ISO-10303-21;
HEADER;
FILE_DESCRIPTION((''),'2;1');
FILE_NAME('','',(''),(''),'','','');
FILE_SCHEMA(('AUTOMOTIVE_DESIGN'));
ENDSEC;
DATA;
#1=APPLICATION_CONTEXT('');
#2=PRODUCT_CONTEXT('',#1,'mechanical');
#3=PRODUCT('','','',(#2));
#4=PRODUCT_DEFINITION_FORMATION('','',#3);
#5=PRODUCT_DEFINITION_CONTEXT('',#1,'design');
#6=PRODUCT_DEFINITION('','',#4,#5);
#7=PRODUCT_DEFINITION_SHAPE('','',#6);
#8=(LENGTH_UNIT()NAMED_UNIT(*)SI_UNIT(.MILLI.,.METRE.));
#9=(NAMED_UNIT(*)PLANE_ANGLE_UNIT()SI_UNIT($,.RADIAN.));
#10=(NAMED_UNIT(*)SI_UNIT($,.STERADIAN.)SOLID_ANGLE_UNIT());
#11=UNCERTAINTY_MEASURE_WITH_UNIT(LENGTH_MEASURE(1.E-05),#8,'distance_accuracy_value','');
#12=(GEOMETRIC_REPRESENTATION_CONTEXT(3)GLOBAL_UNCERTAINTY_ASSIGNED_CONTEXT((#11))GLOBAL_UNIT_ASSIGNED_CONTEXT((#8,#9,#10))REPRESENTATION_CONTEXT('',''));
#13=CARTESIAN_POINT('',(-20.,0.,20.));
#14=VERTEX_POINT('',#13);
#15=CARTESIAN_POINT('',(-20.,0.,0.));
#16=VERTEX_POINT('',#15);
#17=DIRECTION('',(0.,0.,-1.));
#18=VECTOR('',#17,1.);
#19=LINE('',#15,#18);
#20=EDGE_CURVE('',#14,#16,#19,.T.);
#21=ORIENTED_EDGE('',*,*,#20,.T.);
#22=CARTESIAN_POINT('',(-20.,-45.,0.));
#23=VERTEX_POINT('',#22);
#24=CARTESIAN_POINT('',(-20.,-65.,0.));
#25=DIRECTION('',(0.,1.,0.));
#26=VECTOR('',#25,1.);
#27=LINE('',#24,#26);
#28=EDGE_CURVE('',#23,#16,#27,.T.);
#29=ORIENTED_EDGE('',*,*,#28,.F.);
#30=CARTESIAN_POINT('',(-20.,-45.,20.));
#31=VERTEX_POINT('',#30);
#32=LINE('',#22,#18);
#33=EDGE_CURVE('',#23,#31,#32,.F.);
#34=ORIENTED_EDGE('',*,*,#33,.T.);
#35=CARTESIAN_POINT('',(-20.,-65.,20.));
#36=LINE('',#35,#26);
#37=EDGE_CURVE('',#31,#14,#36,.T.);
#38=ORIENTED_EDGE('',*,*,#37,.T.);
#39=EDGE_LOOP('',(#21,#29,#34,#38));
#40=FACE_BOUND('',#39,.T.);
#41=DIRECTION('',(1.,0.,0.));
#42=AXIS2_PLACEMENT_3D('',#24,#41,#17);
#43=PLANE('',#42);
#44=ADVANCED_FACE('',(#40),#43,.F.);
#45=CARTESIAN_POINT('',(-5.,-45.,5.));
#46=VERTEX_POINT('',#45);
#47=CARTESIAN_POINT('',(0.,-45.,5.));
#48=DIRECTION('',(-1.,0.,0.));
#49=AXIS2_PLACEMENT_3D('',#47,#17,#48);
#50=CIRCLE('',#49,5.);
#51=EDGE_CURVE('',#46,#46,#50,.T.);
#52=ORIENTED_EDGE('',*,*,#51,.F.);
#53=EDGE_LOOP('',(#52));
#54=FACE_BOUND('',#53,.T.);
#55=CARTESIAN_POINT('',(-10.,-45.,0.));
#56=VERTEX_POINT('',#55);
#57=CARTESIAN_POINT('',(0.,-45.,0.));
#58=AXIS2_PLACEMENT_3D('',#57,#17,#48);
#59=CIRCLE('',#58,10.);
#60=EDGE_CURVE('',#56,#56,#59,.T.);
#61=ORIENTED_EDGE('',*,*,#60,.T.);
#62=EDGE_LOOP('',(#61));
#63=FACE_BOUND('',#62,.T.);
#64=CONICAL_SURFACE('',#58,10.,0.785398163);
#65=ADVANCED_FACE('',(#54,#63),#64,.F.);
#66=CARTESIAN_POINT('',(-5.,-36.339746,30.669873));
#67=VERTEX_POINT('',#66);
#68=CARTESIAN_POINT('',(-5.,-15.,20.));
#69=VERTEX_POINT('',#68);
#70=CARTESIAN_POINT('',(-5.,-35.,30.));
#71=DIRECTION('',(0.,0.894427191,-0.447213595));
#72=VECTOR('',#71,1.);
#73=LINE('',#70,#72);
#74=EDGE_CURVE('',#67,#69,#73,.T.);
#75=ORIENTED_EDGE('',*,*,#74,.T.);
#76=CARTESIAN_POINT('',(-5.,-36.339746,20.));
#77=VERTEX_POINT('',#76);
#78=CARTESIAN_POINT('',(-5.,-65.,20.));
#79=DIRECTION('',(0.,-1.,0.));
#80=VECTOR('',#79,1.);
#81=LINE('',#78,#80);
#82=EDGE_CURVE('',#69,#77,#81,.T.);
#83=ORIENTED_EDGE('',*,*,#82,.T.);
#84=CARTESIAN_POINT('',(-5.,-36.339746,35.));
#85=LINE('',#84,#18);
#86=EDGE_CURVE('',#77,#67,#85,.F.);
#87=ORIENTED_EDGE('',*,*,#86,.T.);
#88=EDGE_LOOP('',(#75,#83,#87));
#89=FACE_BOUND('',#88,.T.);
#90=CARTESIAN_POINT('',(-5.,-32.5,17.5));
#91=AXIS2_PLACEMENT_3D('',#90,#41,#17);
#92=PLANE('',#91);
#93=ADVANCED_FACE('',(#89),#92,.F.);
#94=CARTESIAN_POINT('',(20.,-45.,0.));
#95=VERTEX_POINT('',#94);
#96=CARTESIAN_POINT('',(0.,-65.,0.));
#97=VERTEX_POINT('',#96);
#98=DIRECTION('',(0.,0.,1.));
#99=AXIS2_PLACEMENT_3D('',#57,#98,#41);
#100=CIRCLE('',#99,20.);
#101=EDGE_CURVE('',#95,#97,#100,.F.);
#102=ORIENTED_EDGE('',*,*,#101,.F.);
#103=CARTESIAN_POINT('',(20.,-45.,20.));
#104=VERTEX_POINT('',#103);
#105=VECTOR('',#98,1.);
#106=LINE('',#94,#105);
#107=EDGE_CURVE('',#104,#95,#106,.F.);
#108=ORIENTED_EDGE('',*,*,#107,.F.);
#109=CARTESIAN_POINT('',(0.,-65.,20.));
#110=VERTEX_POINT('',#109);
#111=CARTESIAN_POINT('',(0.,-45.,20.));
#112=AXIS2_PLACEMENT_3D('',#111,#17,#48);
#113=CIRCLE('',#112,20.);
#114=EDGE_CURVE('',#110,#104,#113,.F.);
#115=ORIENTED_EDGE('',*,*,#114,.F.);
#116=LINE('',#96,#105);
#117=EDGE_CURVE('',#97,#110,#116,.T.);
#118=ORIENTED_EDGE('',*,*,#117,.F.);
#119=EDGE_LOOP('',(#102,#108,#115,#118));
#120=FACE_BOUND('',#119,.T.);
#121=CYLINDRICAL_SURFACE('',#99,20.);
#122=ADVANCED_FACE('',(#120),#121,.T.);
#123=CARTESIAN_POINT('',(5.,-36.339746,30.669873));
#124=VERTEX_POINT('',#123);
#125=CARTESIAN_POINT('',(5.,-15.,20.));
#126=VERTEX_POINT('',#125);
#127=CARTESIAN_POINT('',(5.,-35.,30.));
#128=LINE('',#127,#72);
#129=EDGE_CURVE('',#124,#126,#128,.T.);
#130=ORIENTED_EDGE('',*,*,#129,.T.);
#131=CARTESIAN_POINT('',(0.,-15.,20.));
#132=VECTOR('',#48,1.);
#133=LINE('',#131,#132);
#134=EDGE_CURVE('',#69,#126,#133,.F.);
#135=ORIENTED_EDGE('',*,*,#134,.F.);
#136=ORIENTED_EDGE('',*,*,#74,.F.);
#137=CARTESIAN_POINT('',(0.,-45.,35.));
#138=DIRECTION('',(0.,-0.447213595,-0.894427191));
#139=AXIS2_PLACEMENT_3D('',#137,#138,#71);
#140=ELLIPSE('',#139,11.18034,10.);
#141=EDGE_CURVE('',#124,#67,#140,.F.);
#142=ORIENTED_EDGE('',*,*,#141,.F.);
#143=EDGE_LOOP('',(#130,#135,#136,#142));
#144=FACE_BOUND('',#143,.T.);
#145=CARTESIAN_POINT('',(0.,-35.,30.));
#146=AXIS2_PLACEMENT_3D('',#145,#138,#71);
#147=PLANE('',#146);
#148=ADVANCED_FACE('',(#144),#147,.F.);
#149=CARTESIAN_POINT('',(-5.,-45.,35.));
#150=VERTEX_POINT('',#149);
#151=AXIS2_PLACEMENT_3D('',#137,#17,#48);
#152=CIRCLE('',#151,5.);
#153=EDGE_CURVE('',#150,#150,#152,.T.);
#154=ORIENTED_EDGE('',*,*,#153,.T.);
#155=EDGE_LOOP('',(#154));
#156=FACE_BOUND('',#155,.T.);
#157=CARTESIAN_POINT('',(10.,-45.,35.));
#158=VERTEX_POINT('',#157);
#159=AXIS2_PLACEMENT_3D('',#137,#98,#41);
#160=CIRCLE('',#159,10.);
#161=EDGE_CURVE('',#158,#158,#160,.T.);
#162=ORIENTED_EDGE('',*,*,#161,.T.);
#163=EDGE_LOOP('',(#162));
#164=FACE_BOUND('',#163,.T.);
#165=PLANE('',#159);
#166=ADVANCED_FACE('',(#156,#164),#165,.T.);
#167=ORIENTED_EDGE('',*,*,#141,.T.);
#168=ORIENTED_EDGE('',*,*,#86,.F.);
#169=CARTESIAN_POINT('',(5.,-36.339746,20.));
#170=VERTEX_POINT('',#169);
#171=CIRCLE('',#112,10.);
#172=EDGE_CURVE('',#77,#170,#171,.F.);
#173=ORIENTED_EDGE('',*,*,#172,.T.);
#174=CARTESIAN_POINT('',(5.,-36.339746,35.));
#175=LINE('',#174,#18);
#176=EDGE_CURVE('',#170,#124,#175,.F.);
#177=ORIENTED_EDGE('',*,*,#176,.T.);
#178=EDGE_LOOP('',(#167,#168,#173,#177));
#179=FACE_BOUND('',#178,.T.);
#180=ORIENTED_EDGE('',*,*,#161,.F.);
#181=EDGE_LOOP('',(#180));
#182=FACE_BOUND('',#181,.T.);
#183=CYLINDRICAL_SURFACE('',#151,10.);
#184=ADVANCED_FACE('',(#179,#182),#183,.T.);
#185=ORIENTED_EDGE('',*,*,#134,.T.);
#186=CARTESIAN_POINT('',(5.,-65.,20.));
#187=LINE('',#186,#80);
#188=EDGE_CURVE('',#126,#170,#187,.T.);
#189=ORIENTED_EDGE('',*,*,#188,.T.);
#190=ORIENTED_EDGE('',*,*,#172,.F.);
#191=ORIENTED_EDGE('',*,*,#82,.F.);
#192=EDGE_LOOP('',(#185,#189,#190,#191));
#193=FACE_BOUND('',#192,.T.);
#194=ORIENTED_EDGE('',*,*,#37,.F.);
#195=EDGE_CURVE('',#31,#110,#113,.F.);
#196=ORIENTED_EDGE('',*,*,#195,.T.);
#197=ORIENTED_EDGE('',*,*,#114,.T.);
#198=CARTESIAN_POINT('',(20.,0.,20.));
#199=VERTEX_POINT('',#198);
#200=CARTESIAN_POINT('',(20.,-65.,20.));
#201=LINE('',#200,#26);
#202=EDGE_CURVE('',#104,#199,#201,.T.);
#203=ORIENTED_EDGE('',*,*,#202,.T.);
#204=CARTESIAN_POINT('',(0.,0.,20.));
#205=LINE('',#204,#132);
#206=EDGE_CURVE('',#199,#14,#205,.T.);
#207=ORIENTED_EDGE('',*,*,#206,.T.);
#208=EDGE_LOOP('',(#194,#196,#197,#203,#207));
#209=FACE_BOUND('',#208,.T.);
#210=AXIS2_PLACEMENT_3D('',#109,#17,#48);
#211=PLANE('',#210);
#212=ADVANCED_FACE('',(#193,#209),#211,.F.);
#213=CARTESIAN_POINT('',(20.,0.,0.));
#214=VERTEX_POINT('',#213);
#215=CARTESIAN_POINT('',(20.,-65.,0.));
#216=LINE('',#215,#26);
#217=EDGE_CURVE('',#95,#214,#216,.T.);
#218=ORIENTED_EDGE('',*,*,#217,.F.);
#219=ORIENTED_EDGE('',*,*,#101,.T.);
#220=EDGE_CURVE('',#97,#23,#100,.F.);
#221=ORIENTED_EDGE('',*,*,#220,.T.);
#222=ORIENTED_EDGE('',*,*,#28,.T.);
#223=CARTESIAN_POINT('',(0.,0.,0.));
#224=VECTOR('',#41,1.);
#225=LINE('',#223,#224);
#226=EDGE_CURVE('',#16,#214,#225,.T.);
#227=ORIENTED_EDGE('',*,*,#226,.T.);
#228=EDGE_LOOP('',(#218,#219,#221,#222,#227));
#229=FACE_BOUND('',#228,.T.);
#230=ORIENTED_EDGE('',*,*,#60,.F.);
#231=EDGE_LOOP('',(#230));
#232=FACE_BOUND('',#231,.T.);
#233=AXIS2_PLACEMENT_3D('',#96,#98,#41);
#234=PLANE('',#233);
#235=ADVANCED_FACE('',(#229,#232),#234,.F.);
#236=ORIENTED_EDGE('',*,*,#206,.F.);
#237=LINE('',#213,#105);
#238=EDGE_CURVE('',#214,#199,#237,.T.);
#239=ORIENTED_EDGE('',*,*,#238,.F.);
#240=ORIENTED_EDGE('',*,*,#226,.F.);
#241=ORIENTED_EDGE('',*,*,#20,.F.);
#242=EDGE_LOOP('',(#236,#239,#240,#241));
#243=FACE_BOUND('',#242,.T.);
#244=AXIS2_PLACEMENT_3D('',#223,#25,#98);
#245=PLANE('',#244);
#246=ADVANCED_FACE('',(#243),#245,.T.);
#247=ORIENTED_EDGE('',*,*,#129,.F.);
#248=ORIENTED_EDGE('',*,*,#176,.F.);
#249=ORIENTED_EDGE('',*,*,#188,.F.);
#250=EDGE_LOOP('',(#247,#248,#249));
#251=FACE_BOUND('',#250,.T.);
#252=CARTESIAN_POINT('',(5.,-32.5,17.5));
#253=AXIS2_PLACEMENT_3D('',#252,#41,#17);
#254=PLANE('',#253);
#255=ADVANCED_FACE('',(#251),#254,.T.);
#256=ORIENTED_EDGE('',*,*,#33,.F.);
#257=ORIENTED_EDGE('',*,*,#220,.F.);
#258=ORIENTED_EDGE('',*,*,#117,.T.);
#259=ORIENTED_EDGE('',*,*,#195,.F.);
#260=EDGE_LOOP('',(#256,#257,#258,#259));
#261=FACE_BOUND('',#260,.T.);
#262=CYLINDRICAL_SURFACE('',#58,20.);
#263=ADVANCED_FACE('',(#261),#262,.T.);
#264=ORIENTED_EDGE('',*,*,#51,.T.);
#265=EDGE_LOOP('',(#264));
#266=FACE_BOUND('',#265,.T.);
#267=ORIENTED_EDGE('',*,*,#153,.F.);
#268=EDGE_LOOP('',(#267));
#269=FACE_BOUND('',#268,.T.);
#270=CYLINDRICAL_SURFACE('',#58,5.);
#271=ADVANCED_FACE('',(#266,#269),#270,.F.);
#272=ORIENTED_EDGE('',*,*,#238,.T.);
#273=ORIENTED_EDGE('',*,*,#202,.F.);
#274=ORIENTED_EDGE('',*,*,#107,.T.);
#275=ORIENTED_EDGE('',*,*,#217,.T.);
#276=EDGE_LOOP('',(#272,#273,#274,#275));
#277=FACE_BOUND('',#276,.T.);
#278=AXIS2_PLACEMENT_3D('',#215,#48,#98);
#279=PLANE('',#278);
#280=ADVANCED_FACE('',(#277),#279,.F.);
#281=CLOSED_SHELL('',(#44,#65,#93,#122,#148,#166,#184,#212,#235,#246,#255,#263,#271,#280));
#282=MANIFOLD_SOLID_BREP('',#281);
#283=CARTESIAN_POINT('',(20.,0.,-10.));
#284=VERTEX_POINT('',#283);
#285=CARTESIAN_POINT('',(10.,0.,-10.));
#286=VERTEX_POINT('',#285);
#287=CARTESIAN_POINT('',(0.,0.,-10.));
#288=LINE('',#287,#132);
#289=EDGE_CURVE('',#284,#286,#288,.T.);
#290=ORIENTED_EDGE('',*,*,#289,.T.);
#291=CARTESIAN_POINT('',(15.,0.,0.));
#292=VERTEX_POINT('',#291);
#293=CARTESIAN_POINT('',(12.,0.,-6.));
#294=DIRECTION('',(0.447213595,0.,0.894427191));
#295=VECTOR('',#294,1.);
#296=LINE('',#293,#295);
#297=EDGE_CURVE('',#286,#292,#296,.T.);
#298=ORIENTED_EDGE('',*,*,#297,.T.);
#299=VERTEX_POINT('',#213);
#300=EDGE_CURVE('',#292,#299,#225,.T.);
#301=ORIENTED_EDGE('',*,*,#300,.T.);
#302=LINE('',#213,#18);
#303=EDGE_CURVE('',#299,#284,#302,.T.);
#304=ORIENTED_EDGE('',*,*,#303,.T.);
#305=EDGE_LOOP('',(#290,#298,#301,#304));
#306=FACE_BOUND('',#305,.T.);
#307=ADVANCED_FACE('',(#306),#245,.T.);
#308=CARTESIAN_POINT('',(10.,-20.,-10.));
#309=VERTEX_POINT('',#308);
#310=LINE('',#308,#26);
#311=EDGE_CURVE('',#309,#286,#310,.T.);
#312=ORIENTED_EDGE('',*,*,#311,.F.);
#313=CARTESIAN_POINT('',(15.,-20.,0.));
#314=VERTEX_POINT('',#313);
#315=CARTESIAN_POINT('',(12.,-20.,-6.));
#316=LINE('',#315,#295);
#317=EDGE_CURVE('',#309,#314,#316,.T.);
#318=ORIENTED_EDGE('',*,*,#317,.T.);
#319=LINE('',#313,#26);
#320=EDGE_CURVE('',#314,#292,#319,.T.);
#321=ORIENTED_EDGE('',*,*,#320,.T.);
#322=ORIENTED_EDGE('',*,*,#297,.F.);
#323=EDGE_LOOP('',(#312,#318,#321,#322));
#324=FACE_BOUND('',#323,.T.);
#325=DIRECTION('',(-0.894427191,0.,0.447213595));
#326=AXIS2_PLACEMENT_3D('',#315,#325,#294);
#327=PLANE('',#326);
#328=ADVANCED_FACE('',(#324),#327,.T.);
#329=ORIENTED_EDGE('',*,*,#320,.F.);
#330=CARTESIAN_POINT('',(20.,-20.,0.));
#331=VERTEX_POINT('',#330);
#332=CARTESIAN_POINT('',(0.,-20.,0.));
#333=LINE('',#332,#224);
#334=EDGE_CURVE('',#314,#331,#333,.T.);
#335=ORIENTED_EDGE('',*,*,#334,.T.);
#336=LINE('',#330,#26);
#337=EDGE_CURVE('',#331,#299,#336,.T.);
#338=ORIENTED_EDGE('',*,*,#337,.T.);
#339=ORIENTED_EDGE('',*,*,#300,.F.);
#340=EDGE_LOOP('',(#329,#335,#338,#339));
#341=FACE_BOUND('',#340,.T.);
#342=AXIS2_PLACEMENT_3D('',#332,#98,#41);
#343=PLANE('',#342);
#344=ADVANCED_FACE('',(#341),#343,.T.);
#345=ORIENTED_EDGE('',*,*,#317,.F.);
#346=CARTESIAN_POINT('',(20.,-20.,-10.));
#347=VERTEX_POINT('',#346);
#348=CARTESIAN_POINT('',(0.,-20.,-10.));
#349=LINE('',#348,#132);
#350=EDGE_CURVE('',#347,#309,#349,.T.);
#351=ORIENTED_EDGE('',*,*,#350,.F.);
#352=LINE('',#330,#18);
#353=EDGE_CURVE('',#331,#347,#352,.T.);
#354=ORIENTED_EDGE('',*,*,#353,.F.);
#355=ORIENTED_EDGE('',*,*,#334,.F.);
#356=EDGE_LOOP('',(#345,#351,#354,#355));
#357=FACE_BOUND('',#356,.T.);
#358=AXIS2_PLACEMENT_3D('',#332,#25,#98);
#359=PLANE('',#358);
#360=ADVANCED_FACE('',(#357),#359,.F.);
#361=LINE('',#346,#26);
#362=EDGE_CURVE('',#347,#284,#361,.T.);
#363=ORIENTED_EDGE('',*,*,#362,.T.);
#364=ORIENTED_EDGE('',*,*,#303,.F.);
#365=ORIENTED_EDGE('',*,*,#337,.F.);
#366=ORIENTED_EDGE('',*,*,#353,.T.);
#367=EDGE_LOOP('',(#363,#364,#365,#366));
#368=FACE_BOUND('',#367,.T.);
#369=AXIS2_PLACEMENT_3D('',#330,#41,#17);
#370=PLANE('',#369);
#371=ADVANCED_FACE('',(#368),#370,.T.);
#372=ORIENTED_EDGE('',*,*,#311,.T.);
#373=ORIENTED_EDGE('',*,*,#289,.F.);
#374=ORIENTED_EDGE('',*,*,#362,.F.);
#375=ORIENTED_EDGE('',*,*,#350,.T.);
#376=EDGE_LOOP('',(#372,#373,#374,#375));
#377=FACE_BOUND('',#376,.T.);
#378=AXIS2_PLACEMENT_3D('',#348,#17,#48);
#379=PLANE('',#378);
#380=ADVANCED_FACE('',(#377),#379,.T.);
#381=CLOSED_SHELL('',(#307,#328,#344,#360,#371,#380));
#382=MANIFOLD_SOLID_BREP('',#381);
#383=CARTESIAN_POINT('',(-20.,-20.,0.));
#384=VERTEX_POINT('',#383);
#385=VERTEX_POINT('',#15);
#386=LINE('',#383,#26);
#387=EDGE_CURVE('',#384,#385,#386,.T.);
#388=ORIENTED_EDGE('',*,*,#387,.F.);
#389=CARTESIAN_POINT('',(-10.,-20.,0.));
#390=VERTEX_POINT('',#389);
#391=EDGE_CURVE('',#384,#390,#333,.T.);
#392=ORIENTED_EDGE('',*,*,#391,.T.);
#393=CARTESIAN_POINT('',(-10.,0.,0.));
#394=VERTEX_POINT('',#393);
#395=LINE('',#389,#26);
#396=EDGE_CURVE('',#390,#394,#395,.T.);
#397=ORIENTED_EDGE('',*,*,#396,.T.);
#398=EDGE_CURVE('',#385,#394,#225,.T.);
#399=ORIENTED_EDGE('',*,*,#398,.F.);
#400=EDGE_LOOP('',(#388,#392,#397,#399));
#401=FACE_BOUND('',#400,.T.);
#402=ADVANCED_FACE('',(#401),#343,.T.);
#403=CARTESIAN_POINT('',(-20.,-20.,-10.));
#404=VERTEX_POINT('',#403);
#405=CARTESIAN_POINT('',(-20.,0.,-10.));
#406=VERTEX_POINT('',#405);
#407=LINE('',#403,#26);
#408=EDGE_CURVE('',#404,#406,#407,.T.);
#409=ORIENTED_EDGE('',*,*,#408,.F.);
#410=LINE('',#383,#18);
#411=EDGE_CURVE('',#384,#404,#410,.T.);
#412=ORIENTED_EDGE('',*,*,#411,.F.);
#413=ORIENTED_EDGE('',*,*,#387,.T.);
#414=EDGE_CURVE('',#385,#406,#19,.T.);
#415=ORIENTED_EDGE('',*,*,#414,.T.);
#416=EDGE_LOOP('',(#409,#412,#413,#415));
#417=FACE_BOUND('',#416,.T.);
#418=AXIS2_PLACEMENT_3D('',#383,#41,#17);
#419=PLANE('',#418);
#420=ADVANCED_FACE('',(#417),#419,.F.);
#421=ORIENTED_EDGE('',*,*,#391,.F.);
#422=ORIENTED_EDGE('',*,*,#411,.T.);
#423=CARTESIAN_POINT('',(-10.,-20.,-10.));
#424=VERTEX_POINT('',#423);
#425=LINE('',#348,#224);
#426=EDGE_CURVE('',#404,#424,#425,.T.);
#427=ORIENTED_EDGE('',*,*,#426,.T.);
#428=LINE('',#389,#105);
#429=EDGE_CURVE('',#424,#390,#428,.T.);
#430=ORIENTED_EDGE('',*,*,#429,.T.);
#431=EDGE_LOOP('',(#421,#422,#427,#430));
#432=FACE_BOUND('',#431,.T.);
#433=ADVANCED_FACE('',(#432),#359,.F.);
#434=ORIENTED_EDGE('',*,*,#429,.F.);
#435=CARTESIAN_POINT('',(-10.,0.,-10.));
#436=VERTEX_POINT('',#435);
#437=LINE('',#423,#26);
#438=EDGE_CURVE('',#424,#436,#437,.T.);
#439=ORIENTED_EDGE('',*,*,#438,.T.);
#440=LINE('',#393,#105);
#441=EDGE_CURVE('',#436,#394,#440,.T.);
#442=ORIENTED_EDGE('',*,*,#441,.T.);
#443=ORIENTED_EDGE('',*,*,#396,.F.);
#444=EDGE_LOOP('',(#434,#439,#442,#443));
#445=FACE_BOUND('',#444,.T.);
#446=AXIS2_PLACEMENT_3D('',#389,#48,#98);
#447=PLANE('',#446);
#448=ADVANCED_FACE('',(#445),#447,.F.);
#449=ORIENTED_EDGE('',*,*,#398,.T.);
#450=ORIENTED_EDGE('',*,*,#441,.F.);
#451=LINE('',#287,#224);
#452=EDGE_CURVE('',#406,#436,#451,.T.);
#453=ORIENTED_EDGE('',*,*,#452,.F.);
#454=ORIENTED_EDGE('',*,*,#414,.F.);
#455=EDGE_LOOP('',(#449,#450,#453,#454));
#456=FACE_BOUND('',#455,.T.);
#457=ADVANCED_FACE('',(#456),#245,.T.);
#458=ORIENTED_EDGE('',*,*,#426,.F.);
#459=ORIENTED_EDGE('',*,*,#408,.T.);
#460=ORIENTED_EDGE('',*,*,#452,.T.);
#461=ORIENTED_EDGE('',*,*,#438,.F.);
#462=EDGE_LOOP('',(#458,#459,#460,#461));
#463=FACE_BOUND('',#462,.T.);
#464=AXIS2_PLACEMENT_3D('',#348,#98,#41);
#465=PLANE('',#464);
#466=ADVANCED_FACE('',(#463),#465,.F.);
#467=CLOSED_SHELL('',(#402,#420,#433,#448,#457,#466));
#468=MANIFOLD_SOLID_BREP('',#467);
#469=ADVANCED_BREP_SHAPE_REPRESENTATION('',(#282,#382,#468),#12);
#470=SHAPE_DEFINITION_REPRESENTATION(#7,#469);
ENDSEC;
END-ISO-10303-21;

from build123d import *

# Parameters (mm, degrees)
BOSS_EXTRUDE1_DEPTH   = 65
BOSS_EXTRUDE2_DEPTH   = 20
SKETCH1_4_W           = 10
SKETCH1_4_H           = 10
BOSS_EXTRUDE2_2_DEPTH = 20
FILLET1_R             = 20
SKETCH3_R             = 10
BOSS_EXTRUDE3_DEPTH   = 15
RIB3_REACH            = 78.485
SKETCH5_WALL_W        = 177.331265182
SKETCH5_WALL_H        = 10


with BuildPart() as part:
    # Sketch1 → Boss-Extrude1 (new body)
    with BuildSketch(Plane(origin=(0, 0, 0), x_dir=(-1, 0, 0), z_dir=(0, 1, 0))):
        Polygon((0, 20), (0, 0), (10, 0), (20, 0), (20, 20), align=None)
        Polygon((-15, 0), (0, 0), (0, 20), (-20, 20), (-20, 0), align=None)
    extrude(amount=-BOSS_EXTRUDE1_DEPTH)

    # Fillet1
    fillet1_edges = [part.edges().sort_by_distance(p)[0] for p in [
        (-20, -65, 10),
        (20, -65, 10),
    ]]
    fillet(fillet1_edges, radius=FILLET1_R - 0.0001)  # a hair under: the kernel refuses the full size

    # Sketch3 → Boss-Extrude3 (add)
    with BuildSketch(Plane.XY.offset(20)):
        with Locations(Location((0, -45, 0), (0, 0, 180))):
            Circle(SKETCH3_R)
    extrude(amount=BOSS_EXTRUDE3_DEPTH)

    # Sketch5 wall → Rib3 (add, up to next)
    with BuildSketch(Plane(origin=(0, -25, 25), x_dir=(0, 0.894427191, -0.4472135955), z_dir=(0, 0.4472135955, 0.894427191)), mode=Mode.PRIVATE) as rib3_sk1:
        Rectangle(SKETCH5_WALL_W, SKETCH5_WALL_H)
    rib3_tool1 = extrude(rib3_sk1.sketch, amount=-RIB3_REACH, mode=Mode.PRIVATE) - part.part
    add(rib3_tool1.solids().sort_by_distance((0, -25, 25))[0])

    # Sketch8 → Ø10.0 (10) Diameter Hole1 (revolve, cut)
    with BuildSketch(Plane(origin=(0, -45, 0), x_dir=(0, 1, 0), z_dir=(1, 0, 0))):
        Polygon((0, 0), (0, 35), (5, 35), (5, 5), (10, 0), align=None)
    revolve(axis=Axis((0, -45, -6.35), (0, 0, 1)), mode=Mode.SUBTRACT)


with BuildPart() as body_2:
    # Sketch1<4> → Boss-Extrude2 (new body)
    with BuildSketch(Plane(origin=(0, 0, 0), x_dir=(-1, 0, 0), z_dir=(0, 1, 0))):
        Polygon((-10, -10), (-15, 0), (-20, 0), (-20, -10), align=None)
    extrude(amount=-BOSS_EXTRUDE2_DEPTH)


with BuildPart() as body_3:
    # Sketch1<4> → Boss-Extrude2 2 (new body)
    with BuildSketch(Plane(origin=(0, 0, 0), x_dir=(-1, 0, 0), z_dir=(0, 1, 0))):
        with Locations((15, -5)):
            Rectangle(SKETCH1_4_W, SKETCH1_4_H)
    extrude(amount=-BOSS_EXTRUDE2_2_DEPTH)


solid = Compound([part.part, body_2.part, body_3.part])
